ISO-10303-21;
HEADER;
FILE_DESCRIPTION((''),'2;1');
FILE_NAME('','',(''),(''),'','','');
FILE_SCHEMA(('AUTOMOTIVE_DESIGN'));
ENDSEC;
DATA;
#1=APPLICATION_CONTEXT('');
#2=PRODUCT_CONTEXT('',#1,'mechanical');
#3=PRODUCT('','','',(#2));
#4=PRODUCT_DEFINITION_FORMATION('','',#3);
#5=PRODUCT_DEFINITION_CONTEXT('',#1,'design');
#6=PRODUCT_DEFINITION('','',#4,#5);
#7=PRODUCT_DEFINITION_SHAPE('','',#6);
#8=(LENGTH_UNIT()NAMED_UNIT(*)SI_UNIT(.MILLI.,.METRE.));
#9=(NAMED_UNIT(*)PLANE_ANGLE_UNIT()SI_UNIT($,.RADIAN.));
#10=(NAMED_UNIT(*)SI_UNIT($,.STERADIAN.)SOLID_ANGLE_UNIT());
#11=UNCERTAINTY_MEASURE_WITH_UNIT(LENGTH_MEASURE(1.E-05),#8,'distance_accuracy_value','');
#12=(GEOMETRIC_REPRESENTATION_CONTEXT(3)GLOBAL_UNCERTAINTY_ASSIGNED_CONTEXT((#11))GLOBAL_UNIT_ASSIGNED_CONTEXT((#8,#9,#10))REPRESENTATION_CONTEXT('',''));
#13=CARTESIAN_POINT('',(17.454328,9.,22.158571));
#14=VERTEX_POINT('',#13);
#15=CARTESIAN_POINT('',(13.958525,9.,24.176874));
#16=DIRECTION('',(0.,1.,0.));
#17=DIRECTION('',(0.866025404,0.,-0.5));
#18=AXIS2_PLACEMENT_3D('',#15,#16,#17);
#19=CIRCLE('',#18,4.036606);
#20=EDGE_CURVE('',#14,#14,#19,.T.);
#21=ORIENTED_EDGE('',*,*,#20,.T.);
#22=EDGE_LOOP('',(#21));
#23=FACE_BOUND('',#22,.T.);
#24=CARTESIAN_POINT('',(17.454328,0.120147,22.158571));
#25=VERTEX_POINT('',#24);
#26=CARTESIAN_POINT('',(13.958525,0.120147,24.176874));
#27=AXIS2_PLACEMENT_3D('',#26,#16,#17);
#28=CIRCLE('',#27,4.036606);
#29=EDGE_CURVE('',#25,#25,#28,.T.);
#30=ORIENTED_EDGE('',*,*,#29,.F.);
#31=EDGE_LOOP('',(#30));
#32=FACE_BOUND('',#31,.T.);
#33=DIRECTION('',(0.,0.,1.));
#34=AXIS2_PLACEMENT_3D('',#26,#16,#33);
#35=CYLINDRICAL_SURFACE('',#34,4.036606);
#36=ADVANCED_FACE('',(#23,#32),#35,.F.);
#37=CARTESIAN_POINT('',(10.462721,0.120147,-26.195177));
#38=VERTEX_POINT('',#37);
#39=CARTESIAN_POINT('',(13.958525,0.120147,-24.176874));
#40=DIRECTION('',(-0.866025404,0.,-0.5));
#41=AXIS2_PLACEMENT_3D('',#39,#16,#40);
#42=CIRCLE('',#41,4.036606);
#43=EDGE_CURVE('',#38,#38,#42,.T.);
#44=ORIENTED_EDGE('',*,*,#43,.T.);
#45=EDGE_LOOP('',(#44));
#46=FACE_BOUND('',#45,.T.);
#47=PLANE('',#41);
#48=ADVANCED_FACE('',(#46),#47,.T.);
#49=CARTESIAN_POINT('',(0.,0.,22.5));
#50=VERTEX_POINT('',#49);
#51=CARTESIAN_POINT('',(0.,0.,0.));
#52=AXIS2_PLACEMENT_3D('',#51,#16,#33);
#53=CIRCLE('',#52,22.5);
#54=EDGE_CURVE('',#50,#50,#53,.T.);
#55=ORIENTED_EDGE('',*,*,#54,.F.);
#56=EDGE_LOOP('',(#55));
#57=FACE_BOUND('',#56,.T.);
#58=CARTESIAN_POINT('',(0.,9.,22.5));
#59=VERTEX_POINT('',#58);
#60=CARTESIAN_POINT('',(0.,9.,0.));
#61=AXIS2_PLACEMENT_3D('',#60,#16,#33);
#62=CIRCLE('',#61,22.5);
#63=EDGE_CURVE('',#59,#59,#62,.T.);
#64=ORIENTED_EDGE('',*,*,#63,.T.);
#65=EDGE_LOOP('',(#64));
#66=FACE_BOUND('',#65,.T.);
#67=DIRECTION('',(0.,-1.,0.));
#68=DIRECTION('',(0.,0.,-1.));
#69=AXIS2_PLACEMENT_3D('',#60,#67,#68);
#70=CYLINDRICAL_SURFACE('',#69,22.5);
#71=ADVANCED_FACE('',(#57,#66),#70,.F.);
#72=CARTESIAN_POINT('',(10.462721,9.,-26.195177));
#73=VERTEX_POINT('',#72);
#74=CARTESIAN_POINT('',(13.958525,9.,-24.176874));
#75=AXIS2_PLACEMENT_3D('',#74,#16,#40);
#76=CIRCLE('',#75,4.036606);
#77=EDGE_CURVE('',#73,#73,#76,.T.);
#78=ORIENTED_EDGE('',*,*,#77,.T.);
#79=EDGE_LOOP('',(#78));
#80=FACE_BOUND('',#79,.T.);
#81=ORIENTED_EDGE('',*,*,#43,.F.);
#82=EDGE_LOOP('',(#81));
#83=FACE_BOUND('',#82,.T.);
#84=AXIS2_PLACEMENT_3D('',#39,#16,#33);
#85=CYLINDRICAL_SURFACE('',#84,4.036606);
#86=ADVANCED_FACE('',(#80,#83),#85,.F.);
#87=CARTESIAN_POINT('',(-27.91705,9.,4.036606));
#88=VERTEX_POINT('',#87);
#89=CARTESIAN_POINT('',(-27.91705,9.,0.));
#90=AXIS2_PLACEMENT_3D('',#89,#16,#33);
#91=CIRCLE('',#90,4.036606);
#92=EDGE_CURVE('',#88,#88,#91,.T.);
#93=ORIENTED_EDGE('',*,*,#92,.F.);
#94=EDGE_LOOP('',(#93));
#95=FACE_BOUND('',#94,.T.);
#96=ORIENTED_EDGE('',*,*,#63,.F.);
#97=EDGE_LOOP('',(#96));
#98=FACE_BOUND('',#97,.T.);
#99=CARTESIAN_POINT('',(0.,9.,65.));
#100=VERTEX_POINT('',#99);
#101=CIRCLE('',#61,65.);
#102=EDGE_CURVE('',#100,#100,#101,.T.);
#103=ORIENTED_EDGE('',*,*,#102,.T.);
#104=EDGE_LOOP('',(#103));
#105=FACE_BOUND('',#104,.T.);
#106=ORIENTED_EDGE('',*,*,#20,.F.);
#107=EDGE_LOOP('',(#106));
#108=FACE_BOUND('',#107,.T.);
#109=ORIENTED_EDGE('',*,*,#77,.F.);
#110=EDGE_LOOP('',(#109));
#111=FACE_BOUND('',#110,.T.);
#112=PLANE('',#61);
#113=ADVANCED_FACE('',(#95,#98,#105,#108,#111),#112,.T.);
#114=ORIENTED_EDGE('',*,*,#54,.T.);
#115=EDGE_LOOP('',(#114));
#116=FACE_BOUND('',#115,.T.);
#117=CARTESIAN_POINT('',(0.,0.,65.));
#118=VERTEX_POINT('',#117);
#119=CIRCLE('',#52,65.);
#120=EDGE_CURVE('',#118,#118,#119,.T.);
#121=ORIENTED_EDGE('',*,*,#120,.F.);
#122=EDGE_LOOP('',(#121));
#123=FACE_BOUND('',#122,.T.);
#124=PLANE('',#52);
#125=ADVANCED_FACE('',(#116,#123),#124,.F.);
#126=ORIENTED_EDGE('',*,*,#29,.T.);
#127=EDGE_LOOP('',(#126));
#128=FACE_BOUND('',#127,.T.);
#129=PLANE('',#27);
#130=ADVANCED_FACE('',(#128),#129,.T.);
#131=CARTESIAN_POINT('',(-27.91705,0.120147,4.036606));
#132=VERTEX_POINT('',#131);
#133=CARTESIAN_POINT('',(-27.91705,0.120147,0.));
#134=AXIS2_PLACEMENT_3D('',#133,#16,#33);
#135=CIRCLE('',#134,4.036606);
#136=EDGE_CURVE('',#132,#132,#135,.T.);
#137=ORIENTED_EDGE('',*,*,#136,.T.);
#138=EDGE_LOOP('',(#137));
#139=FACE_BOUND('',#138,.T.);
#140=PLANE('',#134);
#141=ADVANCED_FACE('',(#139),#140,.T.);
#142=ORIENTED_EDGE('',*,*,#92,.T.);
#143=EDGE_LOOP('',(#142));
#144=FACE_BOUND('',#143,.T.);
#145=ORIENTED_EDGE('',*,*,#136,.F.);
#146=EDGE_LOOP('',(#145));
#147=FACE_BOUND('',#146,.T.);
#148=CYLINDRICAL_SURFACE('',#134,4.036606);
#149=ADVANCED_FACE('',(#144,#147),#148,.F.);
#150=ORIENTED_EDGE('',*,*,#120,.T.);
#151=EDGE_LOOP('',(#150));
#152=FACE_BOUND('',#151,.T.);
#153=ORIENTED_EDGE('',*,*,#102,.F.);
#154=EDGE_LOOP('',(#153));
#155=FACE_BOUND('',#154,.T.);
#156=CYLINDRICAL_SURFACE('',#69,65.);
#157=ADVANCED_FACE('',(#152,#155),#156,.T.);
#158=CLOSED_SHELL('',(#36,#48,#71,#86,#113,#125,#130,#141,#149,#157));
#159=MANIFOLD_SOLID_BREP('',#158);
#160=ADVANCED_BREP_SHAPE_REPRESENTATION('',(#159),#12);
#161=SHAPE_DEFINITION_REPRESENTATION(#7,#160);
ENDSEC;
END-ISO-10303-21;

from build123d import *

# Parameters (mm, degrees)
SKETCH1_R           = 65
BOSS_EXTRUDE1_DEPTH = 9
SKETCH2_R           = 22.5
CUT_EXTRUDE1_DEPTH  = 93.36341267
SKETCH3_R           = 4.036606277
CUT_EXTRUDE2_DEPTH  = 8.879852711
CIRPATTERN1_COUNT   = 3


with BuildPart() as part:
    # Sketch1 → Boss-Extrude1 (new body)
    with BuildSketch(Plane(origin=(0, 0, 0), x_dir=(1, 0, 0), z_dir=(0, 1, 0))):
        Circle(SKETCH1_R)
    extrude(amount=BOSS_EXTRUDE1_DEPTH)

    # Sketch2 → Cut-Extrude1 (cut, through all)
    with BuildSketch(Plane(origin=(0, 0, 0), x_dir=(1, 0, 0), z_dir=(0, 1, 0))):
        Circle(SKETCH2_R)
    extrude(amount=CUT_EXTRUDE1_DEPTH, mode=Mode.SUBTRACT)

    # Sketch3 → Cut-Extrude2 (cut)
    with BuildSketch(Plane(origin=(0, 9, 0), x_dir=(1, 0, 0), z_dir=(0, 1, 0))):
        with Locations((-27.91704963, 0)):
            Circle(SKETCH3_R)
    cut_extrude2 = extrude(amount=-CUT_EXTRUDE2_DEPTH, mode=Mode.SUBTRACT)

    # CirPattern1: Cut-Extrude2 ×3 about axis
    cirpattern1_axis = Axis((0, 0, 0), (0, 1, 0))
    for i in range(1, CIRPATTERN1_COUNT):
        add(cut_extrude2.rotate(cirpattern1_axis, i * 360 / CIRPATTERN1_COUNT), mode=Mode.SUBTRACT)


solid = part.part
